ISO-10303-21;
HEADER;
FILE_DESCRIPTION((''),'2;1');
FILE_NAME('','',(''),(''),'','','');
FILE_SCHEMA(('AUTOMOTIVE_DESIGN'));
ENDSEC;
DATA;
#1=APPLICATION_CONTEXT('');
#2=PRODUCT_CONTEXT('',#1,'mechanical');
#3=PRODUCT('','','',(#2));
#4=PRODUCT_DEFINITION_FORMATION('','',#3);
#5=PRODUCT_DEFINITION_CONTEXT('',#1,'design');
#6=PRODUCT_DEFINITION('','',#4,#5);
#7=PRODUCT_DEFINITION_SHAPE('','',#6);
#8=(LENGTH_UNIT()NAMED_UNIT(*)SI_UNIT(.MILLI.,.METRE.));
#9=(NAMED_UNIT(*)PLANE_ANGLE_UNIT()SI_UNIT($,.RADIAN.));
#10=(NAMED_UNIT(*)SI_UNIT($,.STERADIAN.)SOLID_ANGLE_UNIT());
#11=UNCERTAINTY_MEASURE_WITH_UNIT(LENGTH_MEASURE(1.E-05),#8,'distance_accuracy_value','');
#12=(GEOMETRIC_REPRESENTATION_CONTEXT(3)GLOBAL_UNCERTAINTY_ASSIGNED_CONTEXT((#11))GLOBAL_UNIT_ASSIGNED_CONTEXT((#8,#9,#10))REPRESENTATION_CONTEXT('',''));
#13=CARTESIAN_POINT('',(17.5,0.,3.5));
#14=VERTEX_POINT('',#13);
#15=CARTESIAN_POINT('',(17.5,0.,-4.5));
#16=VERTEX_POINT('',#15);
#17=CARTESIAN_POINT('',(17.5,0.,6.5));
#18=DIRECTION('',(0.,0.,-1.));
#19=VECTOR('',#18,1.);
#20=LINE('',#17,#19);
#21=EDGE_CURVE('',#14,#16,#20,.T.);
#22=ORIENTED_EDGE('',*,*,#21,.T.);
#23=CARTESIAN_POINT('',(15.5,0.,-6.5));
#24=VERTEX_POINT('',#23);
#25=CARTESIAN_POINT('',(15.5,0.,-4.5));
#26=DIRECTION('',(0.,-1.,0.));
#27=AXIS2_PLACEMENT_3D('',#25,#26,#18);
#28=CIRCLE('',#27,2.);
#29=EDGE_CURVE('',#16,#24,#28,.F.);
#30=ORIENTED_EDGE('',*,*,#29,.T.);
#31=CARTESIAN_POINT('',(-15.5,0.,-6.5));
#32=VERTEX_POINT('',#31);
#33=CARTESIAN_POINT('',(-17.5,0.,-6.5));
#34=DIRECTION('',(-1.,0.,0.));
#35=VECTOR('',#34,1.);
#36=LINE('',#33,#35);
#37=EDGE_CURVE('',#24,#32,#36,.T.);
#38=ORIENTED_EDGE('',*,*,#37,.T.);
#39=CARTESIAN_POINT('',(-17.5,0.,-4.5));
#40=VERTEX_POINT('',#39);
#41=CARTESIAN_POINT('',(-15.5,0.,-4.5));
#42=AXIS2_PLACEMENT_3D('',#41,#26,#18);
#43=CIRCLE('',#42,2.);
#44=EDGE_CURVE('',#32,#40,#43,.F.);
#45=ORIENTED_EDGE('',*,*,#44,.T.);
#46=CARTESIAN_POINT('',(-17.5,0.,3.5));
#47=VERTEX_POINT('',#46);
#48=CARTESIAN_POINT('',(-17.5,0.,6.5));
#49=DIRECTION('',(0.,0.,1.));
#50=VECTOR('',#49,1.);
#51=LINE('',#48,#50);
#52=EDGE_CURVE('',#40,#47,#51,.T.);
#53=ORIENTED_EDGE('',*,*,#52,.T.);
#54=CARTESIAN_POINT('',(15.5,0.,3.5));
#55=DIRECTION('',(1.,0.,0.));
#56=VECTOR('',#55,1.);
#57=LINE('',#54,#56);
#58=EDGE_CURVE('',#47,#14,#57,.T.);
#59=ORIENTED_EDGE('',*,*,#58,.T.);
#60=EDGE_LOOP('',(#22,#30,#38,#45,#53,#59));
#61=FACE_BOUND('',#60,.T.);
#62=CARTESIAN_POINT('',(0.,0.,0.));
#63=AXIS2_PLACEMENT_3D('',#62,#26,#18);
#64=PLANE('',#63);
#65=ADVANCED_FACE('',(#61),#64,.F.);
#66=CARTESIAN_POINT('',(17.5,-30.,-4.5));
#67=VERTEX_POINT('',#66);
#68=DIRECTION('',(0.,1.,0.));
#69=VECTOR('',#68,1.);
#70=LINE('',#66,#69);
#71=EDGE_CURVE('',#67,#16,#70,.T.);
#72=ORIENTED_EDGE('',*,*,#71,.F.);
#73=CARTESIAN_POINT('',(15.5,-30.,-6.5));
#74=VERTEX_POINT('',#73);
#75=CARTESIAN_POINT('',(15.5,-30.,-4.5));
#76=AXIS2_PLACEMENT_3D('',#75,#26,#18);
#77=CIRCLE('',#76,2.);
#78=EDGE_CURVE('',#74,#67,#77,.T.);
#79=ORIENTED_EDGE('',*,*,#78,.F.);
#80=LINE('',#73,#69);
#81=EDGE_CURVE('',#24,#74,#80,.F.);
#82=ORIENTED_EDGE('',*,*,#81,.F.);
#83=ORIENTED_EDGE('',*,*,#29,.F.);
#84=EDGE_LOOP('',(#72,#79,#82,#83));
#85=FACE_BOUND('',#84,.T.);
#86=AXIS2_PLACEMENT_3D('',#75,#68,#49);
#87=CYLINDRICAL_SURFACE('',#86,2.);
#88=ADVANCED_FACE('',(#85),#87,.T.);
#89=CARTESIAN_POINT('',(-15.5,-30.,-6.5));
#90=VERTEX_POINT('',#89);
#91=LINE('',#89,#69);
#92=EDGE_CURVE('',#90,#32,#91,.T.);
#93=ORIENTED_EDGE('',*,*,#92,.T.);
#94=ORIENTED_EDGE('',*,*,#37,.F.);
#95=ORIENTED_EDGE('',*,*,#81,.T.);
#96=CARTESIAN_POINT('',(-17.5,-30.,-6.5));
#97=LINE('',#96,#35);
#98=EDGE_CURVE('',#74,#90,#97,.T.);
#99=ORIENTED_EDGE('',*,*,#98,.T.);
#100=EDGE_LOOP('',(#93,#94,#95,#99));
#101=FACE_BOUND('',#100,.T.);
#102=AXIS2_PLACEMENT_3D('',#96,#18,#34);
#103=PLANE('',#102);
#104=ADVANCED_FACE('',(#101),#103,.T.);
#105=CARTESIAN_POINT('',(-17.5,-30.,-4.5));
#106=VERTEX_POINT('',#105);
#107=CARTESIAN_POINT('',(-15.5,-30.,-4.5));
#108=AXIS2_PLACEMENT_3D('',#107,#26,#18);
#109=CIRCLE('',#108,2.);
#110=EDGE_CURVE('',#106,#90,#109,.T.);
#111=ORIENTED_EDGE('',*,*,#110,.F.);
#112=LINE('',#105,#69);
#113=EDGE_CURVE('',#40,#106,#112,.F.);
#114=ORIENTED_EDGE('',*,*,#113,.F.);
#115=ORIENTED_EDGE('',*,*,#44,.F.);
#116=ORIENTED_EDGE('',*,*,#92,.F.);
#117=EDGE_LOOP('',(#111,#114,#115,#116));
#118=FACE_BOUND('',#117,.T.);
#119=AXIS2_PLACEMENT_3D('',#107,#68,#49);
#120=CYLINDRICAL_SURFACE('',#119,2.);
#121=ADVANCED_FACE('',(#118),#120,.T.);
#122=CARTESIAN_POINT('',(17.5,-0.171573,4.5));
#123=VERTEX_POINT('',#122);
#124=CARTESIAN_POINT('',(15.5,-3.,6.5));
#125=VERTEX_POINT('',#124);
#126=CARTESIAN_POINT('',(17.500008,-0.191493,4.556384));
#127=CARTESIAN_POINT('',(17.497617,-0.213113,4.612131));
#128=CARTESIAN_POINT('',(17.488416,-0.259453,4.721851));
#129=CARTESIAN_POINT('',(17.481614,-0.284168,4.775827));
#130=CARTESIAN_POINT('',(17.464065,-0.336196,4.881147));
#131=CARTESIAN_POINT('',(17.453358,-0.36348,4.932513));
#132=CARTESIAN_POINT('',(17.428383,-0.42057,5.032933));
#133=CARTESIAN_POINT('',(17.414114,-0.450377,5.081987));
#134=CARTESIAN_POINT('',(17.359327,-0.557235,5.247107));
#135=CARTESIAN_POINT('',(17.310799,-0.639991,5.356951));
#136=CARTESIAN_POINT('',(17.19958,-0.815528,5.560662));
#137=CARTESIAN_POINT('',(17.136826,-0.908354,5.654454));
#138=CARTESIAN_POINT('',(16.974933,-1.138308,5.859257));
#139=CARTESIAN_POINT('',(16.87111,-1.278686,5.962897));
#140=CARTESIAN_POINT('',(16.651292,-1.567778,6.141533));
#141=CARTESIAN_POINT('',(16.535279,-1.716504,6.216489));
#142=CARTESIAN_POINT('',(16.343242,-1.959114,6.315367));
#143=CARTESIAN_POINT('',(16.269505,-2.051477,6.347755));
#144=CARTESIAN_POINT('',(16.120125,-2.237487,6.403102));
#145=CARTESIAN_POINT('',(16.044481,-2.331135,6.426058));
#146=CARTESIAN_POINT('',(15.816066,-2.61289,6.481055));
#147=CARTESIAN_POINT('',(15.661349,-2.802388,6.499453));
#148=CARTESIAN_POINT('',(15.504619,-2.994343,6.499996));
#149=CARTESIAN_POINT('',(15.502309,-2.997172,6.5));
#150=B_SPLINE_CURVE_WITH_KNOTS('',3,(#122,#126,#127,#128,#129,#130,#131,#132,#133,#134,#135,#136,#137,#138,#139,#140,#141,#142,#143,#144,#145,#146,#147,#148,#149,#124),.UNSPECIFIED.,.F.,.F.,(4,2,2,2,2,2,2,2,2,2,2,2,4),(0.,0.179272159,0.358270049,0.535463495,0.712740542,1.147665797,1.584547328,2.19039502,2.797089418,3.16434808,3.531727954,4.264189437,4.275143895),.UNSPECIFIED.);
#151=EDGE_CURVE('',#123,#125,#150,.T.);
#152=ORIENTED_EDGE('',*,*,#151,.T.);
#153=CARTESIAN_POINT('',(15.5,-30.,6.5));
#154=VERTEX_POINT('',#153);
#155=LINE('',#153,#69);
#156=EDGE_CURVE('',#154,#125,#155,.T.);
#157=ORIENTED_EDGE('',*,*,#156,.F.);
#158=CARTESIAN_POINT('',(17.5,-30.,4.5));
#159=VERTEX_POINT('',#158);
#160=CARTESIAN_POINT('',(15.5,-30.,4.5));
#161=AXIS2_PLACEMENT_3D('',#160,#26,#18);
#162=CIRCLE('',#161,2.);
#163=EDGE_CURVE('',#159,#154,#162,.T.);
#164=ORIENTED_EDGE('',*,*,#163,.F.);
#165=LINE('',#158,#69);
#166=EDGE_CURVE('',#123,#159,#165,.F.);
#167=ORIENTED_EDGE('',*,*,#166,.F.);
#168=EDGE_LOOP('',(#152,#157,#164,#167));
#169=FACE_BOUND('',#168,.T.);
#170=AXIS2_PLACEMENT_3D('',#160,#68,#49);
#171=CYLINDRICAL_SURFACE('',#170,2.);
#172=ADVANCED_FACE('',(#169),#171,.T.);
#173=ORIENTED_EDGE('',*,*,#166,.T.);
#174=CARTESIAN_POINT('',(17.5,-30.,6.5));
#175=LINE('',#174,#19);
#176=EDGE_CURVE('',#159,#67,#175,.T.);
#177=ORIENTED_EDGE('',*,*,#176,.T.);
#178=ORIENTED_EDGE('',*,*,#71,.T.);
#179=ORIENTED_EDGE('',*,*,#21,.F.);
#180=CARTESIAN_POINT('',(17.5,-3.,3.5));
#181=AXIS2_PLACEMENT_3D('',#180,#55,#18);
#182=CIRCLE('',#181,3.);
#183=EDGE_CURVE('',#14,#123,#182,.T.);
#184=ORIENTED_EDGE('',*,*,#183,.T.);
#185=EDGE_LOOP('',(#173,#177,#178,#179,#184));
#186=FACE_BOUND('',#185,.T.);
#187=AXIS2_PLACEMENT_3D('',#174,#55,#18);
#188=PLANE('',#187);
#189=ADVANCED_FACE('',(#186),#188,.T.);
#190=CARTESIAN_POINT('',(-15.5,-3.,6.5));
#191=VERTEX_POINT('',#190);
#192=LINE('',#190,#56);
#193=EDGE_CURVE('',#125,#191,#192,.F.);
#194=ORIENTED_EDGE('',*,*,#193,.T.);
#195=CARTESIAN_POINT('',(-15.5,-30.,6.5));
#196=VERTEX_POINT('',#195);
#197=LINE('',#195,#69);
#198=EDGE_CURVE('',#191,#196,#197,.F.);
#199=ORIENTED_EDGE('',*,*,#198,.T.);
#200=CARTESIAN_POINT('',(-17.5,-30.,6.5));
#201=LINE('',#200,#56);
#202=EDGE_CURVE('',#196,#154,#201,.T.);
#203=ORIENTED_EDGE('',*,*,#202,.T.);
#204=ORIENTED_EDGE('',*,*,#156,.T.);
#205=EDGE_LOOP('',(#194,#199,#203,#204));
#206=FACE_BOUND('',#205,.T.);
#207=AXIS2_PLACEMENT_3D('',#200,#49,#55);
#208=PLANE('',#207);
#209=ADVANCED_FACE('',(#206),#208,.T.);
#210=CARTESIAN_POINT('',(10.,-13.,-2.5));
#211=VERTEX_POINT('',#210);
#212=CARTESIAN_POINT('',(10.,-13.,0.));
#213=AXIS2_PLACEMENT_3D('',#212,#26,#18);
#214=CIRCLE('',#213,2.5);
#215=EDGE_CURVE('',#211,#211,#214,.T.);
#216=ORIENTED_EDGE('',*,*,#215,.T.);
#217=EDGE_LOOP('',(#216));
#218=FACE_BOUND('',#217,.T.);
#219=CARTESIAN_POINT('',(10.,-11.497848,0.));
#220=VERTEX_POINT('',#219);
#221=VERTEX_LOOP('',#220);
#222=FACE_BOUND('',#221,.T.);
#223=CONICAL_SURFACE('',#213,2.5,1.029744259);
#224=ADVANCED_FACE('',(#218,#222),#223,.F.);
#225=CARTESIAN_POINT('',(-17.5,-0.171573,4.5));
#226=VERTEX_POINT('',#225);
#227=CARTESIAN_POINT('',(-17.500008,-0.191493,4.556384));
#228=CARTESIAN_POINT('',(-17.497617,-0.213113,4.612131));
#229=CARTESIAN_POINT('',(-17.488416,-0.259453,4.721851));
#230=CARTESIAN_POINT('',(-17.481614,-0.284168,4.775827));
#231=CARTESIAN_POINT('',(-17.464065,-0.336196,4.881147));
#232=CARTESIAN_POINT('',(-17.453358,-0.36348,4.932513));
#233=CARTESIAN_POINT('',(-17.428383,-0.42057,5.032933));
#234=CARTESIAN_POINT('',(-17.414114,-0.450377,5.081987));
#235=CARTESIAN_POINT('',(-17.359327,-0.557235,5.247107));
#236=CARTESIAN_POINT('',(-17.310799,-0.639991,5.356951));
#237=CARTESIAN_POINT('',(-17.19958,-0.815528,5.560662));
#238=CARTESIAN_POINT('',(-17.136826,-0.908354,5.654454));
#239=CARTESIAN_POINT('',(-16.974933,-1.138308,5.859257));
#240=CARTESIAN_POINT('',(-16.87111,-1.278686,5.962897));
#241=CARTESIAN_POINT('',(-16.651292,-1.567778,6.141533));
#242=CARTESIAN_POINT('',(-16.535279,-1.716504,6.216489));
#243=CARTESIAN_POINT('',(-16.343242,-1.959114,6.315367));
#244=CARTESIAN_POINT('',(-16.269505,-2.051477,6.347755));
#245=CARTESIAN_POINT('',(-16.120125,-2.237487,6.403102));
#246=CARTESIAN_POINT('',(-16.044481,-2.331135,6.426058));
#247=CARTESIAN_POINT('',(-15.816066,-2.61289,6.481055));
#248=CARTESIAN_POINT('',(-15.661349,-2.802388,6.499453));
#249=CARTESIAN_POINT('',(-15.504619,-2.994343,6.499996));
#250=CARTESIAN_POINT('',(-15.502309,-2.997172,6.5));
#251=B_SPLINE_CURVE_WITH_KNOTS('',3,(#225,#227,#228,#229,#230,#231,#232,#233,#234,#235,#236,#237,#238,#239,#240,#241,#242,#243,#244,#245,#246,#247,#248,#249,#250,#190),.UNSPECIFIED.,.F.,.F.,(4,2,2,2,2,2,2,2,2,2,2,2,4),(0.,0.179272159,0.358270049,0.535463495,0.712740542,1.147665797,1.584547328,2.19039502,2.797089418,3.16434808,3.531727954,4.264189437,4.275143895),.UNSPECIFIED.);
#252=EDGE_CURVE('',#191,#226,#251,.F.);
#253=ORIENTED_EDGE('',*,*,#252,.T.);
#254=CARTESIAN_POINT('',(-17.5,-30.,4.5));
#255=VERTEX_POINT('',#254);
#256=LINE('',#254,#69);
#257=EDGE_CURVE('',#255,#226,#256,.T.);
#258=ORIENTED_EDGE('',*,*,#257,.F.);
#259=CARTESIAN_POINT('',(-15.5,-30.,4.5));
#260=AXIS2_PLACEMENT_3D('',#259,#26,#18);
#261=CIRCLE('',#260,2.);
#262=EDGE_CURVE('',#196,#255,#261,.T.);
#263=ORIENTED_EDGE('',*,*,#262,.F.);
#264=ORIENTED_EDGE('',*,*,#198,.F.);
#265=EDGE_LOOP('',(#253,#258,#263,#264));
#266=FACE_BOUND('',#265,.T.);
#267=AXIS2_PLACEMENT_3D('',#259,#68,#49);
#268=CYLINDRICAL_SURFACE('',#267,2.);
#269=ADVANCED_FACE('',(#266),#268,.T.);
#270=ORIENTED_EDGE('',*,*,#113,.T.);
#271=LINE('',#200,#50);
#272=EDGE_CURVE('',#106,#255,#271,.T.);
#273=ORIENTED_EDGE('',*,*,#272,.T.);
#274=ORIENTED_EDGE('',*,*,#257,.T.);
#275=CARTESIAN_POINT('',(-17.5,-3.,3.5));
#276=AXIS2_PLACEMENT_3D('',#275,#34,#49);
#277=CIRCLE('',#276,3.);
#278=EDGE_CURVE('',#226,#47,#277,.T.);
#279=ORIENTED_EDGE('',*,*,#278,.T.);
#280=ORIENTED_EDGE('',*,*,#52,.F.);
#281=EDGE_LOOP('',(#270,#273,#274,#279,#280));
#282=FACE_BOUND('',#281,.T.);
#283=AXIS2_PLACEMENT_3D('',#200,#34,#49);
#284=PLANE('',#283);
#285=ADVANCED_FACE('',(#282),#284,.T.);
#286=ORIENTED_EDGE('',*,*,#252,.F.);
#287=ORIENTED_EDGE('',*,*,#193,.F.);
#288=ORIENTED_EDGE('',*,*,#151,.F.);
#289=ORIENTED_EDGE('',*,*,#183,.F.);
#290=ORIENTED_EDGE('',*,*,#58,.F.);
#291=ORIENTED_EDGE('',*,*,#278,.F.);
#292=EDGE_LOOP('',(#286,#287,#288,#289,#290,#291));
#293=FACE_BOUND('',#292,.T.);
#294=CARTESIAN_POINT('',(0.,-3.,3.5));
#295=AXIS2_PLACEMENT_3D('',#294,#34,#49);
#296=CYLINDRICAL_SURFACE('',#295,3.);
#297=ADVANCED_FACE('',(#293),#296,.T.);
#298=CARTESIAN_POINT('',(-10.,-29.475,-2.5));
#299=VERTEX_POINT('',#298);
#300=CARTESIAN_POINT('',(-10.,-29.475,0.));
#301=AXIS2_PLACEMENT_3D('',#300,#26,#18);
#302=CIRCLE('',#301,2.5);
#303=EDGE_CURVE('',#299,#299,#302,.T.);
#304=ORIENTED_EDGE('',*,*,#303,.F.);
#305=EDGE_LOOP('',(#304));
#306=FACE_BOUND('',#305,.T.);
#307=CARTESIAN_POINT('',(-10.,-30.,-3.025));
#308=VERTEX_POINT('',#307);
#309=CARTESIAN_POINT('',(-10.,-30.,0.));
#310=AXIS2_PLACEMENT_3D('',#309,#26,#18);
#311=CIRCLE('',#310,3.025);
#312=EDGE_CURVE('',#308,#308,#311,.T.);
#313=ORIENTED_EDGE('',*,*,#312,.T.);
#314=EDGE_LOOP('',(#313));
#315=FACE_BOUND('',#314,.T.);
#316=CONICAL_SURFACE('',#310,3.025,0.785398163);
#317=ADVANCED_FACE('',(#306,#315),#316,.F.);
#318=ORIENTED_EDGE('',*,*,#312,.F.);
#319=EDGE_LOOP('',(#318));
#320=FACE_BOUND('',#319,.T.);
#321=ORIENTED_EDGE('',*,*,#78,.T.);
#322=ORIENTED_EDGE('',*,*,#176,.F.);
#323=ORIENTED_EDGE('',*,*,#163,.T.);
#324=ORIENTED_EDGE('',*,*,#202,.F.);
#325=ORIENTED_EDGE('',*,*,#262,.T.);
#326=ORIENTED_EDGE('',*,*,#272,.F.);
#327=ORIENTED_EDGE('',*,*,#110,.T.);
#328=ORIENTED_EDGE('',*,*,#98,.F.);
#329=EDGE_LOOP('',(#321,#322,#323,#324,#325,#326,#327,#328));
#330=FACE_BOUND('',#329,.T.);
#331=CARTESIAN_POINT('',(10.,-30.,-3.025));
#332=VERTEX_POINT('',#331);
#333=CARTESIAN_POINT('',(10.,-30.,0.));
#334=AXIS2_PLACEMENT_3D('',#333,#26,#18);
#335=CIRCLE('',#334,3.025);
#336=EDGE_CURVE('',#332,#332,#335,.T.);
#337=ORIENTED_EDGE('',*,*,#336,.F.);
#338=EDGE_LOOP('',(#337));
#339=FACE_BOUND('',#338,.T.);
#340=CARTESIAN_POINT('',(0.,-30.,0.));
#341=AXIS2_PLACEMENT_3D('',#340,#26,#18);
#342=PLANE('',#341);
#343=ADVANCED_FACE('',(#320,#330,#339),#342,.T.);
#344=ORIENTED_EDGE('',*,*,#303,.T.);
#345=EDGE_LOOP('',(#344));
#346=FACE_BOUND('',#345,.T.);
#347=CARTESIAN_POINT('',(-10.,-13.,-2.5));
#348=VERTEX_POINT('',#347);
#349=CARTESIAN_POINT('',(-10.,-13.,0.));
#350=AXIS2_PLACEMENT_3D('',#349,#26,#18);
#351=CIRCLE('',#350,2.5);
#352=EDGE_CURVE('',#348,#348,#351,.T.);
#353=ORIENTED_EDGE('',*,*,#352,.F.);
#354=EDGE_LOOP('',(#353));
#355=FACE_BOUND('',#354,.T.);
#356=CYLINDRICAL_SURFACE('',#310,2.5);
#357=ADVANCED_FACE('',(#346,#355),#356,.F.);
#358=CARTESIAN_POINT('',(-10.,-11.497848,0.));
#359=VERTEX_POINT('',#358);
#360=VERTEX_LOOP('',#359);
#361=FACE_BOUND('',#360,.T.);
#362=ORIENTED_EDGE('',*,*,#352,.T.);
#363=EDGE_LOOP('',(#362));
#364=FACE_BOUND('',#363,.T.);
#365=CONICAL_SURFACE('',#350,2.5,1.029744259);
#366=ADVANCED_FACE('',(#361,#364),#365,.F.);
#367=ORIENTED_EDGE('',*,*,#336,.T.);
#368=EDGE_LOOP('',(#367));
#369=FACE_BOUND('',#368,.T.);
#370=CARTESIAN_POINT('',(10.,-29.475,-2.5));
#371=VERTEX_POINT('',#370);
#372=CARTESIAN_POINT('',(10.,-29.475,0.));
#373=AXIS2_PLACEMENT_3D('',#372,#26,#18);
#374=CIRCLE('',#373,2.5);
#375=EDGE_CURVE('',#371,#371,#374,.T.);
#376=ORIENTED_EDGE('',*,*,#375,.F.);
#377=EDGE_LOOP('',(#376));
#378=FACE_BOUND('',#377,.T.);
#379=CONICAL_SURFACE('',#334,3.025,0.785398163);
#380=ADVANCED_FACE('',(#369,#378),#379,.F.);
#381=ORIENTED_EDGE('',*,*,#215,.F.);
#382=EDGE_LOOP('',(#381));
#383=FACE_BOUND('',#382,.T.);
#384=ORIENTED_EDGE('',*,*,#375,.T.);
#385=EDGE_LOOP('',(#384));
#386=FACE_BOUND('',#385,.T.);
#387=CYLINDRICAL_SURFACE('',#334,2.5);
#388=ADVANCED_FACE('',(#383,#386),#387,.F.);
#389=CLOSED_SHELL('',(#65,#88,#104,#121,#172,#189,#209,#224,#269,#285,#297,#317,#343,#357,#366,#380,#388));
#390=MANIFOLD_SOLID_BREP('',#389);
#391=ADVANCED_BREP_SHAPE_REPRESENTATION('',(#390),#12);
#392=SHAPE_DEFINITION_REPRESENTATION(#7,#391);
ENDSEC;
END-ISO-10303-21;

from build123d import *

# Parameters (mm, degrees)
SKETCH1_W                   = 35
SKETCH1_H                   = 13
BOSS_EXTRUDE1_DEPTH         = 30
FILLET1_R                   = 2
FILLET2_R                   = 3
M6_TAPPED_HOLE1_D           = 5
M6_TAPPED_HOLE1_DEPTH       = 17
M6_TAPPED_HOLE1_CSINK_D     = 6.05
M6_TAPPED_HOLE1_CSINK_ANGLE = 90
M6_TAPPED_HOLE1_TIP         = 1.502151548


with BuildPart() as part:
    # Sketch1 → Boss-Extrude1 (new body)
    with BuildSketch(Plane(origin=(0, 0, 0), x_dir=(1, 0, 0), z_dir=(0, 1, 0))):
        Rectangle(SKETCH1_W, SKETCH1_H)
    extrude(amount=-BOSS_EXTRUDE1_DEPTH)

    # Fillet1
    fillet1_edges = [part.edges().sort_by_distance(p)[0] for p in [
        (17.5, -15, 6.5),
        (-17.5, -15, 6.5),
        (-17.5, -15, -6.5),
        (17.5, -15, -6.5),
    ]]
    fillet(fillet1_edges, radius=FILLET1_R)

    # Fillet2
    # the kernel refuses this fillet: 3 mm, written as the material it takes off along each edge
    with BuildSketch(Plane(origin=(-23, 0, 6.5), x_dir=(0, -1, 0), z_dir=(1, 0, 0))) as fillet2_piece_1:
        with BuildLine():
            CenterArc((FILLET2_R, FILLET2_R), FILLET2_R, 180, 90)
            Line((0, FILLET2_R), (0, 0))
            Line((0, 0), (FILLET2_R, 0))
        make_face()
    extrude(amount=46, mode=Mode.SUBTRACT)

    # M6 Tapped Hole1
    with Locations(Plane(origin=(0, -30, 0), x_dir=(-1, 0, 0), z_dir=(0, -1, 0))):
        with Locations((-10, 0), (10, 0)):
            CounterSinkHole(M6_TAPPED_HOLE1_D / 2, M6_TAPPED_HOLE1_CSINK_D / 2, depth=M6_TAPPED_HOLE1_DEPTH, counter_sink_angle=M6_TAPPED_HOLE1_CSINK_ANGLE)
            with Locations((0, 0, -(M6_TAPPED_HOLE1_DEPTH + M6_TAPPED_HOLE1_TIP / 2))):  # 118° drill point
                Cone(0, M6_TAPPED_HOLE1_D / 2, M6_TAPPED_HOLE1_TIP, mode=Mode.SUBTRACT)


solid = part.part
